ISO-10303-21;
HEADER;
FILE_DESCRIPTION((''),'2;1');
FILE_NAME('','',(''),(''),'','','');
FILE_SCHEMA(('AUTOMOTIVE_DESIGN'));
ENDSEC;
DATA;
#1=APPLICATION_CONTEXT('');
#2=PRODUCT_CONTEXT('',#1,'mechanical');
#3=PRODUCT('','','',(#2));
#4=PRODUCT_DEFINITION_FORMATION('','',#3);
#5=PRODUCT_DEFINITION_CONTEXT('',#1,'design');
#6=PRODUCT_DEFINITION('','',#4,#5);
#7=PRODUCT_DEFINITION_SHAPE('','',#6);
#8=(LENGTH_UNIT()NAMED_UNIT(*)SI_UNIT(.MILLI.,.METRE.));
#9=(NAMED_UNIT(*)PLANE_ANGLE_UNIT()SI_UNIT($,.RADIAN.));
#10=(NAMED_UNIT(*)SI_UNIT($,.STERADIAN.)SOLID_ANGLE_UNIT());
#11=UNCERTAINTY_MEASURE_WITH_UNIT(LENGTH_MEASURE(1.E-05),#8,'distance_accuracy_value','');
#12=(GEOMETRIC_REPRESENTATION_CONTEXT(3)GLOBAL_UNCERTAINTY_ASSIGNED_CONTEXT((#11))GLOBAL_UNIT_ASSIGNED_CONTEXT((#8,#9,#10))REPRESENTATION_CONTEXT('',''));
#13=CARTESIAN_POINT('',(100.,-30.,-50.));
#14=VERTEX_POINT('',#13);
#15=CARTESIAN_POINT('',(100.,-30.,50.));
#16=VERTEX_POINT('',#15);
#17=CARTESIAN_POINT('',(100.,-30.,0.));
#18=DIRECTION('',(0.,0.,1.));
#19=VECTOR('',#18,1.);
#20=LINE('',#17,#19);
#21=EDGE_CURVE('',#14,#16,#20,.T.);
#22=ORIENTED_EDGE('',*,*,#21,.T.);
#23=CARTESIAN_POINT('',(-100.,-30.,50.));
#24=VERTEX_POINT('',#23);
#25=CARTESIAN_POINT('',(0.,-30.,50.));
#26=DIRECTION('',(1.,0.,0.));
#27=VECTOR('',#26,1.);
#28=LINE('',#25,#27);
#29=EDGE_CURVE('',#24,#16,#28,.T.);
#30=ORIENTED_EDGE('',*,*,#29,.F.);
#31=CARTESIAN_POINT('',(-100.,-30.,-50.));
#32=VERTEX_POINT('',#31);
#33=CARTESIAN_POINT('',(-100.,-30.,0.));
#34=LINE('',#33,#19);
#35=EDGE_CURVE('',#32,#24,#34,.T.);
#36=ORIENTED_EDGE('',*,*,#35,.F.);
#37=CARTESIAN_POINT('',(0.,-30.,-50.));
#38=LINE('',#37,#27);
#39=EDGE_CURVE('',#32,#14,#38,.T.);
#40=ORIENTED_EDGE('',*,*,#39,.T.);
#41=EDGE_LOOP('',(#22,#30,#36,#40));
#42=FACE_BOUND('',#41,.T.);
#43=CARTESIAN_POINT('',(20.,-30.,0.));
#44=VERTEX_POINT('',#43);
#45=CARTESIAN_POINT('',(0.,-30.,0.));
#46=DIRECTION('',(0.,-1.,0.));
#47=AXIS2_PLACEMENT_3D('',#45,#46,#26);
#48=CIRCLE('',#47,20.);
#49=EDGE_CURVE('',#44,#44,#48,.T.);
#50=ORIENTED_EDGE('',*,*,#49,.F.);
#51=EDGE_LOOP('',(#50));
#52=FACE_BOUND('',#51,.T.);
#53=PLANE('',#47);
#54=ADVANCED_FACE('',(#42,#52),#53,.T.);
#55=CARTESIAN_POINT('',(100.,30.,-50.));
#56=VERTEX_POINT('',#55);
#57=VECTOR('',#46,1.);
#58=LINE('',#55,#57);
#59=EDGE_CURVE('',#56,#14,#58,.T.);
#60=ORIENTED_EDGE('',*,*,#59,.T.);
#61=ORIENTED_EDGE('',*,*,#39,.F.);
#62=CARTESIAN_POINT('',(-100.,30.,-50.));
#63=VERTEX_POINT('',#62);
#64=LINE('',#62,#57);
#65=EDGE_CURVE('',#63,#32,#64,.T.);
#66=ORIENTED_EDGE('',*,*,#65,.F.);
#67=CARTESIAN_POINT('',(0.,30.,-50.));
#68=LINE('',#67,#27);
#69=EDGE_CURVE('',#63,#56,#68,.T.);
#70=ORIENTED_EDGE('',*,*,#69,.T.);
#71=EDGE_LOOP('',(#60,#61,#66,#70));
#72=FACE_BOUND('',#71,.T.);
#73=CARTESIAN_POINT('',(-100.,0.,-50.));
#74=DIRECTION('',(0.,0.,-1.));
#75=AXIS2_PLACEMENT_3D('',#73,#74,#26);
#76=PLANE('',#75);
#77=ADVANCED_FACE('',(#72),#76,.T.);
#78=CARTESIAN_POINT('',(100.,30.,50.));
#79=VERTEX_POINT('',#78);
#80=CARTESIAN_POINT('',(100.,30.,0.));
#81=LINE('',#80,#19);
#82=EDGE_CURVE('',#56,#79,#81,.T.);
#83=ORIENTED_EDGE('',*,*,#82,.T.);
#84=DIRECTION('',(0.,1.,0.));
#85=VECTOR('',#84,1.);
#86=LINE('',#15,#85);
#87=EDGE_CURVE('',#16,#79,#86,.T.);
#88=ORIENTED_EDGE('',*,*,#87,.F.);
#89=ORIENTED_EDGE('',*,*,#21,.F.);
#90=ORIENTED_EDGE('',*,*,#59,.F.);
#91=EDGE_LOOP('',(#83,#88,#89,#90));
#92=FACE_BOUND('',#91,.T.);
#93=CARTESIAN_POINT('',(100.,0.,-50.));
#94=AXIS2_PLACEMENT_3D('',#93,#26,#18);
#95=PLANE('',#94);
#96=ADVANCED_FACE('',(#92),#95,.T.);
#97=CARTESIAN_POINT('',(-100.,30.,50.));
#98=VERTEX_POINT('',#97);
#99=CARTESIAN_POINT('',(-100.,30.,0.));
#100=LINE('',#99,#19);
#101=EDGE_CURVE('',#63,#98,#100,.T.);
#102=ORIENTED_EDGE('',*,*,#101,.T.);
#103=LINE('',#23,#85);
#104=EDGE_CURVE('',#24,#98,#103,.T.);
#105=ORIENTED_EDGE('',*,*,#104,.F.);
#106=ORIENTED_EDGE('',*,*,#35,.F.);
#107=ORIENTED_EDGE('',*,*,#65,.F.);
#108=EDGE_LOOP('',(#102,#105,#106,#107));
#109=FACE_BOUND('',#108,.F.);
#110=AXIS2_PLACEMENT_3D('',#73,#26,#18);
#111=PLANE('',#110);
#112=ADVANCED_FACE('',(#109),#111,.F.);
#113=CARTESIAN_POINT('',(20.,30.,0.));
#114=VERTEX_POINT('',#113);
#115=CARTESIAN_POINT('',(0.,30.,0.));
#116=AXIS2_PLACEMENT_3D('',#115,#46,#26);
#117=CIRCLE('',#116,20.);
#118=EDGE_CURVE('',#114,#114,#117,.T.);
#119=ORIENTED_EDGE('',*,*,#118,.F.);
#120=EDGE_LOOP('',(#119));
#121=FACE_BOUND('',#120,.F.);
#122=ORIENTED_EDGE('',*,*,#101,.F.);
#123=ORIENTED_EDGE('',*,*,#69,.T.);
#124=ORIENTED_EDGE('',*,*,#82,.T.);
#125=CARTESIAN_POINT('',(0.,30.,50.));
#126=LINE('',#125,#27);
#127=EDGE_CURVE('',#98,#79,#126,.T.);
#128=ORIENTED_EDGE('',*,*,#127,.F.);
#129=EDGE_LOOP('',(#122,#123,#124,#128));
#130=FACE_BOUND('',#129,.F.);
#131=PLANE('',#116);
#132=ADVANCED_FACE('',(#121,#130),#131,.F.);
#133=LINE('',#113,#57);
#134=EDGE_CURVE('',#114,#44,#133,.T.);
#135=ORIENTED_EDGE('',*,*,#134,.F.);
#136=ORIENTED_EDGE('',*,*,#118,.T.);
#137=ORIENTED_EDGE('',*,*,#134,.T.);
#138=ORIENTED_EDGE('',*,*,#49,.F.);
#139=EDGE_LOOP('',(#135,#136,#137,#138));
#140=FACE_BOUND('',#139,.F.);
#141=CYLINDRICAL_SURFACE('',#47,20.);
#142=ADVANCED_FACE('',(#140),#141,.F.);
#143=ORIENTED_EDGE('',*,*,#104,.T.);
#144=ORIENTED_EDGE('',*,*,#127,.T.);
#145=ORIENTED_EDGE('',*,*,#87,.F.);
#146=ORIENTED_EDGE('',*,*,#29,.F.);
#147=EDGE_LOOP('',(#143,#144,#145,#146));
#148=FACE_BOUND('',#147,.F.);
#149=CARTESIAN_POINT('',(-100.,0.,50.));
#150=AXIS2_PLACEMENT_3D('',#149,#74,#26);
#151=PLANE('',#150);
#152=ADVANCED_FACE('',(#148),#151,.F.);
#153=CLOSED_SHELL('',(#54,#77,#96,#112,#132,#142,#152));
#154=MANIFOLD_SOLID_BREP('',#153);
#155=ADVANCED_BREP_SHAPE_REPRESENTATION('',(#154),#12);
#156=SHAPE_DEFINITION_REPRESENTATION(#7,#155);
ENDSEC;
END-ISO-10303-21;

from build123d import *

# Parameters (mm, degrees)
F0_W     = 200
F0_H     = 100
F1_DEPTH = 30
F2_R     = 20
F3_DEPTH = 60


with BuildPart() as f1:
    # F0 (on Front) → F1 (new body, symmetric)
    with BuildSketch(Plane.XZ):
        Rectangle(F0_W, F0_H)
    extrude(amount=F1_DEPTH, both=True)

    # F2 (on face) → F3 (cut, symmetric)
    with BuildSketch(Plane.XZ.offset(30)):
        Circle(F2_R)
    extrude(amount=F3_DEPTH, both=True, mode=Mode.SUBTRACT)


solid = f1.part
